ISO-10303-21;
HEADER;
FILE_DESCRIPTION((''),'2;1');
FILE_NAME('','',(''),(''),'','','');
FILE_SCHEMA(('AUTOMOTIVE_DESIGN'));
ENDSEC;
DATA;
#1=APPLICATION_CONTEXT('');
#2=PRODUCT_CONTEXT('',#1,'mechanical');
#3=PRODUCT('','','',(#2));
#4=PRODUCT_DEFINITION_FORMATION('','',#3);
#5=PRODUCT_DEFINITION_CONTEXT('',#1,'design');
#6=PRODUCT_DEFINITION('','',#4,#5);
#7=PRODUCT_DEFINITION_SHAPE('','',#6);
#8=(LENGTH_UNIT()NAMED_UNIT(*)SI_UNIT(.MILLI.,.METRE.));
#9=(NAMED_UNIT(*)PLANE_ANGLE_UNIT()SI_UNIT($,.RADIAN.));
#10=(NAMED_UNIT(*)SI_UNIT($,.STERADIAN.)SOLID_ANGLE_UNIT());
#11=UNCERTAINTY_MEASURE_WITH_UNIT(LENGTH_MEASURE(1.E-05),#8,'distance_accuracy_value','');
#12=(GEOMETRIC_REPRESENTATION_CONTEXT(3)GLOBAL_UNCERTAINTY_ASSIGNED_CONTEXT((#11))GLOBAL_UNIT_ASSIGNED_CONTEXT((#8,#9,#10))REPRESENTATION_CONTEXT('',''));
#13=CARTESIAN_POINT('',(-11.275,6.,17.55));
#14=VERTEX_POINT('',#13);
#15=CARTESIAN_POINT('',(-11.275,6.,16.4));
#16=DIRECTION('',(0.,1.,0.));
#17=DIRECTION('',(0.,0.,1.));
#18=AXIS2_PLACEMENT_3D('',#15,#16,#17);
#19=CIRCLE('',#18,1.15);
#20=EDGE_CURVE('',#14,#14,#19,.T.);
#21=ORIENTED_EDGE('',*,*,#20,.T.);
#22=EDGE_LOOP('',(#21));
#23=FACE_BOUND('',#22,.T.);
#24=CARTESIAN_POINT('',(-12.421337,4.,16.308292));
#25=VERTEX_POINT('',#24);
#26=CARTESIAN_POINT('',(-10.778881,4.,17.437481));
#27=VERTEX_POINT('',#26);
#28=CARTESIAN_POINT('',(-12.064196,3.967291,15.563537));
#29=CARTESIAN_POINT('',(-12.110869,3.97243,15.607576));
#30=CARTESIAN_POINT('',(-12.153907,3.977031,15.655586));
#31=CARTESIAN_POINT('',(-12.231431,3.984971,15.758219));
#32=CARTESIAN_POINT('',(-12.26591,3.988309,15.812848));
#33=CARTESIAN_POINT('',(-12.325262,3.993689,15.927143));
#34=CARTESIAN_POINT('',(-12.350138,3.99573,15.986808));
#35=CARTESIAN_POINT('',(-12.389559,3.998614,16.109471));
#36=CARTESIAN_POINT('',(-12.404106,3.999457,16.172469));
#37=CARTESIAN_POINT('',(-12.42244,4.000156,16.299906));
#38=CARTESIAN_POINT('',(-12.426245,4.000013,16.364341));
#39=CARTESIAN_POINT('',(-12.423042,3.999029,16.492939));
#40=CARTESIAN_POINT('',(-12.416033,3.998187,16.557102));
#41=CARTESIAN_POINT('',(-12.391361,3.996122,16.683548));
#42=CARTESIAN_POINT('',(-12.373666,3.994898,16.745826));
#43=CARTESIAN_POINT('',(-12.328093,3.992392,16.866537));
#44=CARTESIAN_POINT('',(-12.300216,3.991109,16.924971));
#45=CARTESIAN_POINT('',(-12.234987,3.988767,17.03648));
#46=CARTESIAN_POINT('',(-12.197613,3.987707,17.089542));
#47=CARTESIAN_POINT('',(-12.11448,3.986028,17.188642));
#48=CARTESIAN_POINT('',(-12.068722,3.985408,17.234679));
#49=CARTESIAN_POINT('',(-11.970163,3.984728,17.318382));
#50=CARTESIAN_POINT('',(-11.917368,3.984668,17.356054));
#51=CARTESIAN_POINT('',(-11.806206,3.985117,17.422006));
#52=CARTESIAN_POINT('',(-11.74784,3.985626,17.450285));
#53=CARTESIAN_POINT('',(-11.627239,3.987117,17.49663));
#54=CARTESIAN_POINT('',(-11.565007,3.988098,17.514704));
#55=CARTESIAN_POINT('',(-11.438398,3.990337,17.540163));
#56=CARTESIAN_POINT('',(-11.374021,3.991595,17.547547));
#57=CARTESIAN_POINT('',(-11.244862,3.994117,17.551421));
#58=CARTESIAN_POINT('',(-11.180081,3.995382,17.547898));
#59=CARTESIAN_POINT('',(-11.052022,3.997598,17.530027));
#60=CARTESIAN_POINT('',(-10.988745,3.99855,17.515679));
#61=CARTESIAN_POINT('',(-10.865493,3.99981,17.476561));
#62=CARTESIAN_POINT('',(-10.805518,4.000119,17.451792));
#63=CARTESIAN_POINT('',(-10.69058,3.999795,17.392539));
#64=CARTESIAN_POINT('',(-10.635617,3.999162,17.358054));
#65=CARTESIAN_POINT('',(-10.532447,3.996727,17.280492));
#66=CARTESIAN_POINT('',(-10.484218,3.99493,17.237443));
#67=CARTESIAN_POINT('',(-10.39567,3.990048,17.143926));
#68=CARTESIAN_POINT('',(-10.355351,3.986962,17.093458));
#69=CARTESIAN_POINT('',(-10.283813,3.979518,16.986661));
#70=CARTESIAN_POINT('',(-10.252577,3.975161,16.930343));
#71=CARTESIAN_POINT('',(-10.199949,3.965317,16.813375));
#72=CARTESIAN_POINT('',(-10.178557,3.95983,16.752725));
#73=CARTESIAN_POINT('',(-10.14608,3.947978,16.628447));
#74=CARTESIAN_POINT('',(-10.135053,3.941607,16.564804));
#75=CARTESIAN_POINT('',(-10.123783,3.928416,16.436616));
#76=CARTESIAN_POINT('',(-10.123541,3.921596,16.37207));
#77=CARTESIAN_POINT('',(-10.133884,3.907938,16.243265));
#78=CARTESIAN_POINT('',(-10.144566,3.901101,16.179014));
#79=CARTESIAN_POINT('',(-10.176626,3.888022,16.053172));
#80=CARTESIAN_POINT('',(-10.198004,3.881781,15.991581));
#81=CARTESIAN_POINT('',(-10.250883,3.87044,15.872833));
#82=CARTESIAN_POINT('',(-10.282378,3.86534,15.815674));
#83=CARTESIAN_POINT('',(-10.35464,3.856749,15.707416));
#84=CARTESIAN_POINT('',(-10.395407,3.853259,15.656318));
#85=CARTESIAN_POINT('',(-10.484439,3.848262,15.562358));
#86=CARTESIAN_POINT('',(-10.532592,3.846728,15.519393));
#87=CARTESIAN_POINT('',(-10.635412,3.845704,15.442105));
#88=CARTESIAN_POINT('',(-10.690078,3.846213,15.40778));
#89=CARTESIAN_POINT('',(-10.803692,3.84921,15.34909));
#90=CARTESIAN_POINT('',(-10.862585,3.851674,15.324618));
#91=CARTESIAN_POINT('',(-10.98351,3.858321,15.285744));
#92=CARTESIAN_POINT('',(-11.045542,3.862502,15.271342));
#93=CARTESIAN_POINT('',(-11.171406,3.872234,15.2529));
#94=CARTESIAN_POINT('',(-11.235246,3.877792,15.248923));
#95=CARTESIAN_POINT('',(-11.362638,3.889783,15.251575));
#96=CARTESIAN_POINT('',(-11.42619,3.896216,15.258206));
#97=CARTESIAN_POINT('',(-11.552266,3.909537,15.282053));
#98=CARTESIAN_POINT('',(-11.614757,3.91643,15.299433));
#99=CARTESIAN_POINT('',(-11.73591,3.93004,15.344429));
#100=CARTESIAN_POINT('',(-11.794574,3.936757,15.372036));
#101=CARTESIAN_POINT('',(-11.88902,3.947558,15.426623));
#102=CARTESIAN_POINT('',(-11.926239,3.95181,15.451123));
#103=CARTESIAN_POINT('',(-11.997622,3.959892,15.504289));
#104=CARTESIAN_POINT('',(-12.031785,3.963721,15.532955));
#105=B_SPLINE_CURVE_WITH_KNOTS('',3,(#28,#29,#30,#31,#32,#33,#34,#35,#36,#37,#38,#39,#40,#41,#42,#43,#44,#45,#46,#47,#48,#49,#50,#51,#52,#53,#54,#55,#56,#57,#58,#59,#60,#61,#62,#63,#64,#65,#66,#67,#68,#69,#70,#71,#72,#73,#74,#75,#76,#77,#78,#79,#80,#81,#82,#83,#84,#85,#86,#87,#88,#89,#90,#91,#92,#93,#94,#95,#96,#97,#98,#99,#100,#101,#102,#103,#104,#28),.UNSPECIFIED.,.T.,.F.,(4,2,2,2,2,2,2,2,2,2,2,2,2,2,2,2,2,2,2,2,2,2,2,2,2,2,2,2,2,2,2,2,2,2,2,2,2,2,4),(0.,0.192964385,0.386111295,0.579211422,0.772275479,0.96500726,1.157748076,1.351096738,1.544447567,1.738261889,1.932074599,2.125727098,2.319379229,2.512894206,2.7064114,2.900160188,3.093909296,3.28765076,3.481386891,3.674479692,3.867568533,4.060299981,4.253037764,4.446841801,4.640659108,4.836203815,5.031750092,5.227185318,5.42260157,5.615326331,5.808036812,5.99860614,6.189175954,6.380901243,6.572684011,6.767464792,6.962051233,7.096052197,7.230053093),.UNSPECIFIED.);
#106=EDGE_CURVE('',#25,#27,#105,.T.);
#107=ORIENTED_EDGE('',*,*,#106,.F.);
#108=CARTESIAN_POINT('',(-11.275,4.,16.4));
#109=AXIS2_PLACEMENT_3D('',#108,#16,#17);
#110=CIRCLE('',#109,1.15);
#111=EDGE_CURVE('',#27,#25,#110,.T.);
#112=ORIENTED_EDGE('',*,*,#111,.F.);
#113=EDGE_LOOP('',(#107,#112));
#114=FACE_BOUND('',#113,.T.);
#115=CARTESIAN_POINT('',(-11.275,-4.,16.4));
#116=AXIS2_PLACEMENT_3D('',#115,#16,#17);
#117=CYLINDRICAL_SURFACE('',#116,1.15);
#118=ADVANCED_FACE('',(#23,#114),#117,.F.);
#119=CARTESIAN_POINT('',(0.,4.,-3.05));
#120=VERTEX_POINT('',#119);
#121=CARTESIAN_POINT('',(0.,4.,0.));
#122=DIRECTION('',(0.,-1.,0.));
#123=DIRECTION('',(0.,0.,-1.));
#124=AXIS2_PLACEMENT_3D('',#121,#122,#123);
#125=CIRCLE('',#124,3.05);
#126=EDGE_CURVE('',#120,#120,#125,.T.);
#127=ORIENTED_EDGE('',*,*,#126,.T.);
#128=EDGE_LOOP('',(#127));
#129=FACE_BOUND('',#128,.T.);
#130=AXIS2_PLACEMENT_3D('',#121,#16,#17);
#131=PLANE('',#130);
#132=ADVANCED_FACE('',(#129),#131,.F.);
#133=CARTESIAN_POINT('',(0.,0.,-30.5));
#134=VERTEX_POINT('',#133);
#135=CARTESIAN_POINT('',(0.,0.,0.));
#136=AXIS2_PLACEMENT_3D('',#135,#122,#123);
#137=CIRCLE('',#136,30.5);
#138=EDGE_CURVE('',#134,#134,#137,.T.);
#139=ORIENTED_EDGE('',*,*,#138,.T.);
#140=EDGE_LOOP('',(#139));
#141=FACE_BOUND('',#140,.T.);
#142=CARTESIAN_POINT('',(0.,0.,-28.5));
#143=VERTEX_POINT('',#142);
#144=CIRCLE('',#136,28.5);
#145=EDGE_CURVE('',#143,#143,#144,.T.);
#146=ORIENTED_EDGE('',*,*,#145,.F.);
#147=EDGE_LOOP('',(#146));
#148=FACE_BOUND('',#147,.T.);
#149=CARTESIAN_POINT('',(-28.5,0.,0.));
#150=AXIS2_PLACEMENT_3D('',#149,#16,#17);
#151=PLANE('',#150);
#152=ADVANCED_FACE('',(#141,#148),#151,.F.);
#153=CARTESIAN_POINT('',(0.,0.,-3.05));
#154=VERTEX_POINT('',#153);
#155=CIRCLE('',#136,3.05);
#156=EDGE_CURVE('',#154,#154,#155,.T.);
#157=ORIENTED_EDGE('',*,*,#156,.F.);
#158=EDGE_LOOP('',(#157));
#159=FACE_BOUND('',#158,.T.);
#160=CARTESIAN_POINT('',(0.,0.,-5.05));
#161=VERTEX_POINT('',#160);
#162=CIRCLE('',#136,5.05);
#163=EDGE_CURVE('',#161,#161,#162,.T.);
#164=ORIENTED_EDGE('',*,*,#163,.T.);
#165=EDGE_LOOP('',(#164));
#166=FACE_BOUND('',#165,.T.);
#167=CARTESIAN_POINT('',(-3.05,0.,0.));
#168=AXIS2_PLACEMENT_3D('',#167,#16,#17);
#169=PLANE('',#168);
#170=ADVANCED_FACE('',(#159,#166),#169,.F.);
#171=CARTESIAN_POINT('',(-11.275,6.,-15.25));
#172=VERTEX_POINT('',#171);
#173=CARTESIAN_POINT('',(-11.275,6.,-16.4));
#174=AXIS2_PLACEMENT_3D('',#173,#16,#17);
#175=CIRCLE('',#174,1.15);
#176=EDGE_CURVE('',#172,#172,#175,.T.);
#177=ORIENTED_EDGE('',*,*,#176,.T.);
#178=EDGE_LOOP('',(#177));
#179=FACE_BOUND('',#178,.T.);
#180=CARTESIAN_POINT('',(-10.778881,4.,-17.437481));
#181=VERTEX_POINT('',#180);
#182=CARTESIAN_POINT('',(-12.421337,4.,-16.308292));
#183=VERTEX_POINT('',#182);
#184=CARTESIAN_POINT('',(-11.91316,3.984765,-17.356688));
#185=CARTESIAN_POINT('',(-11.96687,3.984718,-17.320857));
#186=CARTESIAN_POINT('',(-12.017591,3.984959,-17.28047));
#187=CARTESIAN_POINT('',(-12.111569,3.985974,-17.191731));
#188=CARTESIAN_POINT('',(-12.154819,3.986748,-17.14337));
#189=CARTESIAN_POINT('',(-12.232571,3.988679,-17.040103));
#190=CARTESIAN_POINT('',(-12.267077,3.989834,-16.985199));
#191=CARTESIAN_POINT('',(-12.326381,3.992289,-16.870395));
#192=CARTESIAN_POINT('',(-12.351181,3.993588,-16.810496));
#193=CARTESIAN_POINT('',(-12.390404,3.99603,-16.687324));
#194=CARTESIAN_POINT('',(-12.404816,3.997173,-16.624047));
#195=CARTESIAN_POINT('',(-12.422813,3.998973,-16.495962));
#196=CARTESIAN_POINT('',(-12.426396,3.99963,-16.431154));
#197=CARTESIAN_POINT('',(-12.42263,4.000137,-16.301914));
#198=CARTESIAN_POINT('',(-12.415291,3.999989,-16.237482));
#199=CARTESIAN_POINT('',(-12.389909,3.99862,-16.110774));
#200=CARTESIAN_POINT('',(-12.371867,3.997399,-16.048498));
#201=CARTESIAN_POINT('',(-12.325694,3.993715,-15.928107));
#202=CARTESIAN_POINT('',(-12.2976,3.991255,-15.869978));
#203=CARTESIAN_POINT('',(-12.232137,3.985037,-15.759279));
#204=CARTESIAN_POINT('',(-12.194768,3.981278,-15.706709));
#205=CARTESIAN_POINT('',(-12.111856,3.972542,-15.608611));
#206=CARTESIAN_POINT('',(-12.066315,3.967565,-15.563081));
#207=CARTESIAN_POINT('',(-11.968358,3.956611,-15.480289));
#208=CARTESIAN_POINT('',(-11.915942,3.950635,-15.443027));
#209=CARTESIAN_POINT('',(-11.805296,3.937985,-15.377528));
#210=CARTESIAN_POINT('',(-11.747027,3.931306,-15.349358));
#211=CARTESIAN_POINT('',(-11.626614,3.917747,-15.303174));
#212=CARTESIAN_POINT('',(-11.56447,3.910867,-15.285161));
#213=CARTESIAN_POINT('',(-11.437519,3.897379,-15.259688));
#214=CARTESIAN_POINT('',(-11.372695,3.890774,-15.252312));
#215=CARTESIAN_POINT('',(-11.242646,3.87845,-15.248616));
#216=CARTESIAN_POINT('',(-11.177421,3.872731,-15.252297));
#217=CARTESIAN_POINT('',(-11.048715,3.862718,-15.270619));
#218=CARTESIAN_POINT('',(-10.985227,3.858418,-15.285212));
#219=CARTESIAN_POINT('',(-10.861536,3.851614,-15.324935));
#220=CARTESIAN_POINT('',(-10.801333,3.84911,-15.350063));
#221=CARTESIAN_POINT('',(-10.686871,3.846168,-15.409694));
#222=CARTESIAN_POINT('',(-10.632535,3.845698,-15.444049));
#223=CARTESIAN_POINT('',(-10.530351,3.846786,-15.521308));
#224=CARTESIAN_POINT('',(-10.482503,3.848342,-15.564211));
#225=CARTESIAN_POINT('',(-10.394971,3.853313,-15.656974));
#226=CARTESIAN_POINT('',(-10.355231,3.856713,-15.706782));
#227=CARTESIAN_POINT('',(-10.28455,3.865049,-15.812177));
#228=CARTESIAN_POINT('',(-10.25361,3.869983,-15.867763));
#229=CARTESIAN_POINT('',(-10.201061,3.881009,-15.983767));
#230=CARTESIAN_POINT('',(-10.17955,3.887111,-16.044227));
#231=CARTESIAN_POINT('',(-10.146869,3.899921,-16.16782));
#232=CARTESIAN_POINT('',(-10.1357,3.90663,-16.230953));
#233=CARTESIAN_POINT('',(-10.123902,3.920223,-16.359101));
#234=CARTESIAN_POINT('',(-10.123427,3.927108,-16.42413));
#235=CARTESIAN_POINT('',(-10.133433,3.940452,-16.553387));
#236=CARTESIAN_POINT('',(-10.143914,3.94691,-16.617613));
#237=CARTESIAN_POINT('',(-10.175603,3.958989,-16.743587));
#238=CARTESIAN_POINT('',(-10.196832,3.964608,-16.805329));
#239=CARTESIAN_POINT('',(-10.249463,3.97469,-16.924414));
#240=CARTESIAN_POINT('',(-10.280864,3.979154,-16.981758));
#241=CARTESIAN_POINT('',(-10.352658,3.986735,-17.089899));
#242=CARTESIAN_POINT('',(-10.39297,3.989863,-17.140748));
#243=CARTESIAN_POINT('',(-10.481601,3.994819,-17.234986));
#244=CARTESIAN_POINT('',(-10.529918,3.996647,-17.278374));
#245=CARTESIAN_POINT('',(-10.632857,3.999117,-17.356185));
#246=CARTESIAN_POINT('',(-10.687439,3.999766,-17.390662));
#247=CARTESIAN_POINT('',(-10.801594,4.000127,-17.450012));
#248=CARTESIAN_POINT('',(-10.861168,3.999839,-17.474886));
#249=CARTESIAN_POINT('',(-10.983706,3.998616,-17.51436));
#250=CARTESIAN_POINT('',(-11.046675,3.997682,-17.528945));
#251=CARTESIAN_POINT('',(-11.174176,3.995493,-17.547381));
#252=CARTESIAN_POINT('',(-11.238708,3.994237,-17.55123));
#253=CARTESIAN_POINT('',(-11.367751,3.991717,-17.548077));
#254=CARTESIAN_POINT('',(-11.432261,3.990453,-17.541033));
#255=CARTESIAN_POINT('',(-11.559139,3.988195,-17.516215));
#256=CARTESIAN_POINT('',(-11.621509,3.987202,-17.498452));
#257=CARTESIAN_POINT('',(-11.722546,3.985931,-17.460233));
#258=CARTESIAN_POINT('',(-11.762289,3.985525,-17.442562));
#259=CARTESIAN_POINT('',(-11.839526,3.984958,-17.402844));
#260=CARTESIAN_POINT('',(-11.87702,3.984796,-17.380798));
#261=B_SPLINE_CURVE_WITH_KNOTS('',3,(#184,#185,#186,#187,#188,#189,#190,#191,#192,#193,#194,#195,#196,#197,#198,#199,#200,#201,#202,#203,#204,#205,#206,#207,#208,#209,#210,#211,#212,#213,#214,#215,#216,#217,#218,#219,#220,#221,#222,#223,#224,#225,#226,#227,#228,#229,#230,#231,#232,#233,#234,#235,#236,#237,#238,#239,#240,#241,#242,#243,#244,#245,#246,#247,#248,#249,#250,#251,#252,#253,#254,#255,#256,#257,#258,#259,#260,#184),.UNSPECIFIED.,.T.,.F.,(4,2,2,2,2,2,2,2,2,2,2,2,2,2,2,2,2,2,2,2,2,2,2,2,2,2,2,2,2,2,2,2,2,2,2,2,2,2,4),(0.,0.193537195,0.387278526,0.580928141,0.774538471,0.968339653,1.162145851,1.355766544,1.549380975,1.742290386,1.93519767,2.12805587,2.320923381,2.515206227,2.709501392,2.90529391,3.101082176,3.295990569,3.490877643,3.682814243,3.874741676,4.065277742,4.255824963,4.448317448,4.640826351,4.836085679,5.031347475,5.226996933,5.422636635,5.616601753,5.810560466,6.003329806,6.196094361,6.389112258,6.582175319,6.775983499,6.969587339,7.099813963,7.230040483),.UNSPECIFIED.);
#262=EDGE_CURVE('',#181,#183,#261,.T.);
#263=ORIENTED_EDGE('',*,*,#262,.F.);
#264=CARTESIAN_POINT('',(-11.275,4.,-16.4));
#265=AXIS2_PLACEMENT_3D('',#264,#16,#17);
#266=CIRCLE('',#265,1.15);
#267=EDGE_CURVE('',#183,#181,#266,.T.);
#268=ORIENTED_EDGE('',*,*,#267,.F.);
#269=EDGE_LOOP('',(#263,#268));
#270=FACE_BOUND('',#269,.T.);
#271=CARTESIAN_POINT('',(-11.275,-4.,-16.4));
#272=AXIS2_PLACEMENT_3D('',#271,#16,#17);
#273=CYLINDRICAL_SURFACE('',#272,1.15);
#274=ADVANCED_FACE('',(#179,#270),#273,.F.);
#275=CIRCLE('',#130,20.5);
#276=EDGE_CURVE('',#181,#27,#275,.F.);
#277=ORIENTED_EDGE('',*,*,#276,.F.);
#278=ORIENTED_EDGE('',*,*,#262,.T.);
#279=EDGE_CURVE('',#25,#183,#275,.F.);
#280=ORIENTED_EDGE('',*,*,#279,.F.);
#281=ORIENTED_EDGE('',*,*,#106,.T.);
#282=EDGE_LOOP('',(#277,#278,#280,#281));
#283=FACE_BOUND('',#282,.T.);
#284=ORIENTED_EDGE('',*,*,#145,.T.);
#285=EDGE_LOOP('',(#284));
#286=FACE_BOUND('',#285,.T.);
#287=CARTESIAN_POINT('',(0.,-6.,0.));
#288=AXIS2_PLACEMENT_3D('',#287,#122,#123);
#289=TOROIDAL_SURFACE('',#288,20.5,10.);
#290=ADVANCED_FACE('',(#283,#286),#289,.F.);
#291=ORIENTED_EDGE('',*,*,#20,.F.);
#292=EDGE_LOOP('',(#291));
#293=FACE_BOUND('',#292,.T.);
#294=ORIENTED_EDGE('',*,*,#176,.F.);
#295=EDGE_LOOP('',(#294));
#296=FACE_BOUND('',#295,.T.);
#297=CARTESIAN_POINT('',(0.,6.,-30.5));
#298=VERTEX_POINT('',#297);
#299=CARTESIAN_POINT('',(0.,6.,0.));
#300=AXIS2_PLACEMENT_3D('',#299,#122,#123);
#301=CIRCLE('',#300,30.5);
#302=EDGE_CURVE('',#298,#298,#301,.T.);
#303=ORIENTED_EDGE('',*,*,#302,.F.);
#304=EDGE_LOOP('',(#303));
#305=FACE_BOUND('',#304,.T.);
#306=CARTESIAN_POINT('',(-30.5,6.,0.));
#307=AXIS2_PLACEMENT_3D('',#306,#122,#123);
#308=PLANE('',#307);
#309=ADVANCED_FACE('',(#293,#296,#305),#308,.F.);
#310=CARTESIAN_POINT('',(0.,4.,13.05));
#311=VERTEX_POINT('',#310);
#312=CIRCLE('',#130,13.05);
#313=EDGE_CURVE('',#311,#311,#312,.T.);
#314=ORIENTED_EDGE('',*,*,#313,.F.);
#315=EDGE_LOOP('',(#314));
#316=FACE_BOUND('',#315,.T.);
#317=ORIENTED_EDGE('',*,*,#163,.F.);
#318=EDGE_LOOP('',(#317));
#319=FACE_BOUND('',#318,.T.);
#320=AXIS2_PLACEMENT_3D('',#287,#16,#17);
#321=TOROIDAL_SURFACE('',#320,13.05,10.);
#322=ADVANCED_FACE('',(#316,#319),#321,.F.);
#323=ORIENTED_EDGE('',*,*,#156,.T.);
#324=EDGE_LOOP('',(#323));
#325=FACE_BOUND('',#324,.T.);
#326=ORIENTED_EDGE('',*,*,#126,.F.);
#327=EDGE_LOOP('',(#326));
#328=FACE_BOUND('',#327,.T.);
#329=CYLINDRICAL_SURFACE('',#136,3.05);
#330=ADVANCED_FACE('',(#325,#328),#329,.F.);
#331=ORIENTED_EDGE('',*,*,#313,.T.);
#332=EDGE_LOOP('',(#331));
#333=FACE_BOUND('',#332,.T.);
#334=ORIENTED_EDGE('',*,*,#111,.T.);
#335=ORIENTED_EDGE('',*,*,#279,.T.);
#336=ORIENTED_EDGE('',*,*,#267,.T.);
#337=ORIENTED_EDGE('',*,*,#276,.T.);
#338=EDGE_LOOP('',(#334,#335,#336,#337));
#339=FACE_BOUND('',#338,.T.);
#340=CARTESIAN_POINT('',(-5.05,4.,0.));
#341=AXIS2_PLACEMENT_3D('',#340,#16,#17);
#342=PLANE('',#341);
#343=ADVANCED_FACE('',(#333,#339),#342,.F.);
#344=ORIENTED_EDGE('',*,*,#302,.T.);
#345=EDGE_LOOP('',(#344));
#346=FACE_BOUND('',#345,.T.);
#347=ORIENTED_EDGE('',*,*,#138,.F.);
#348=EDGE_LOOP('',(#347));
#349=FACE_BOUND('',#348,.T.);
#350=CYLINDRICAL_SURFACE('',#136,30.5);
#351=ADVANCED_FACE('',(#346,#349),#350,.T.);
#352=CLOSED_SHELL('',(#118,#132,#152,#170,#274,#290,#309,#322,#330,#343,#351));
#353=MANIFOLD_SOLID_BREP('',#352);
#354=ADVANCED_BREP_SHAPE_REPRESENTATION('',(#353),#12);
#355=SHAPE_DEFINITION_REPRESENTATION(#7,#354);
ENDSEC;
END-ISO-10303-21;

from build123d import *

# Parameters (mm, degrees)
FILLET1_R          = 10
SKETCH6_R          = 1.15
CUT_EXTRUDE1_DEPTH = 10


with BuildPart() as part:
    # Sketch2 → Revolve1 (revolve)
    with BuildSketch(Plane.XY, mode=Mode.PRIVATE) as revolve1_sk:
        Polygon((0, 4), (-3.05, 4), (-3.05, 3), (-3.05, 0), (-5.05, 0), (-5.05, 4), (-28.5, 4), (-28.5, 0), (-30.5, 0), (-30.5, 4), (-30.5, 6), (0, 6), align=None)
    revolve(revolve1_sk.sketch.rotate(Axis((0, 0, 0), (0, 1, 0)), 270), axis=Axis((0, 0, 0), (0, 1, 0)))

    # Fillet1
    # the kernel refuses this fillet: 10 mm, written as the material it adds along each edge
    with BuildSketch(Plane(origin=(0, 4, 0), x_dir=(0, 0, -1), z_dir=(1, 0, 0))) as fillet1_piece_1:
        with BuildLine():
            CenterArc((20.5, -10), FILLET1_R, 36.869897646, 53.130102354)
            Line((28.5, -4), (28.66, -3.88))
            ThreePointArc((28.66, -3.88), (28.7, -2), (28.7, 0))
            Line((28.7, 0), (28.5, 0.2))
            Line((28.5, 0.2), (20.5, 0.2))
            Line((20.5, 0.2), (20.5, 0))
        make_face()
    revolve(axis=Axis((0, 4, 0), (0, 1, 0)))
    with BuildSketch(Plane(origin=(0, 4, 0), x_dir=(0, 0, -1), z_dir=(1, 0, 0))) as fillet1_piece_2:
        with BuildLine():
            CenterArc((13.05, -10), FILLET1_R, 90, 53.130102354)
            Line((13.05, 0), (13.05, 0.2))
            Line((13.05, 0.2), (5.05, 0.2))
            Line((5.05, 0.2), (4.85, 0))
            ThreePointArc((4.85, 0), (4.85, -2), (4.89, -3.88))
            Line((4.89, -3.88), (5.05, -4))
        make_face()
    revolve(axis=Axis((0, 4, 0), (0, 1, 0)))

    # Sketch6 → Cut-Extrude1 (cut)
    with BuildSketch(Plane(origin=(0, 6, 0), x_dir=(1, 0, 0), z_dir=(0, 1, 0))):
        with Locations(Location((-11.275, 16.4, 0), (0, 0, 270))):
            Circle(SKETCH6_R)
        with Locations(Location((-11.275, -16.4, 0), (0, 0, 270))):
            Circle(SKETCH6_R)
    extrude(amount=-CUT_EXTRUDE1_DEPTH, mode=Mode.SUBTRACT)


solid = part.part
